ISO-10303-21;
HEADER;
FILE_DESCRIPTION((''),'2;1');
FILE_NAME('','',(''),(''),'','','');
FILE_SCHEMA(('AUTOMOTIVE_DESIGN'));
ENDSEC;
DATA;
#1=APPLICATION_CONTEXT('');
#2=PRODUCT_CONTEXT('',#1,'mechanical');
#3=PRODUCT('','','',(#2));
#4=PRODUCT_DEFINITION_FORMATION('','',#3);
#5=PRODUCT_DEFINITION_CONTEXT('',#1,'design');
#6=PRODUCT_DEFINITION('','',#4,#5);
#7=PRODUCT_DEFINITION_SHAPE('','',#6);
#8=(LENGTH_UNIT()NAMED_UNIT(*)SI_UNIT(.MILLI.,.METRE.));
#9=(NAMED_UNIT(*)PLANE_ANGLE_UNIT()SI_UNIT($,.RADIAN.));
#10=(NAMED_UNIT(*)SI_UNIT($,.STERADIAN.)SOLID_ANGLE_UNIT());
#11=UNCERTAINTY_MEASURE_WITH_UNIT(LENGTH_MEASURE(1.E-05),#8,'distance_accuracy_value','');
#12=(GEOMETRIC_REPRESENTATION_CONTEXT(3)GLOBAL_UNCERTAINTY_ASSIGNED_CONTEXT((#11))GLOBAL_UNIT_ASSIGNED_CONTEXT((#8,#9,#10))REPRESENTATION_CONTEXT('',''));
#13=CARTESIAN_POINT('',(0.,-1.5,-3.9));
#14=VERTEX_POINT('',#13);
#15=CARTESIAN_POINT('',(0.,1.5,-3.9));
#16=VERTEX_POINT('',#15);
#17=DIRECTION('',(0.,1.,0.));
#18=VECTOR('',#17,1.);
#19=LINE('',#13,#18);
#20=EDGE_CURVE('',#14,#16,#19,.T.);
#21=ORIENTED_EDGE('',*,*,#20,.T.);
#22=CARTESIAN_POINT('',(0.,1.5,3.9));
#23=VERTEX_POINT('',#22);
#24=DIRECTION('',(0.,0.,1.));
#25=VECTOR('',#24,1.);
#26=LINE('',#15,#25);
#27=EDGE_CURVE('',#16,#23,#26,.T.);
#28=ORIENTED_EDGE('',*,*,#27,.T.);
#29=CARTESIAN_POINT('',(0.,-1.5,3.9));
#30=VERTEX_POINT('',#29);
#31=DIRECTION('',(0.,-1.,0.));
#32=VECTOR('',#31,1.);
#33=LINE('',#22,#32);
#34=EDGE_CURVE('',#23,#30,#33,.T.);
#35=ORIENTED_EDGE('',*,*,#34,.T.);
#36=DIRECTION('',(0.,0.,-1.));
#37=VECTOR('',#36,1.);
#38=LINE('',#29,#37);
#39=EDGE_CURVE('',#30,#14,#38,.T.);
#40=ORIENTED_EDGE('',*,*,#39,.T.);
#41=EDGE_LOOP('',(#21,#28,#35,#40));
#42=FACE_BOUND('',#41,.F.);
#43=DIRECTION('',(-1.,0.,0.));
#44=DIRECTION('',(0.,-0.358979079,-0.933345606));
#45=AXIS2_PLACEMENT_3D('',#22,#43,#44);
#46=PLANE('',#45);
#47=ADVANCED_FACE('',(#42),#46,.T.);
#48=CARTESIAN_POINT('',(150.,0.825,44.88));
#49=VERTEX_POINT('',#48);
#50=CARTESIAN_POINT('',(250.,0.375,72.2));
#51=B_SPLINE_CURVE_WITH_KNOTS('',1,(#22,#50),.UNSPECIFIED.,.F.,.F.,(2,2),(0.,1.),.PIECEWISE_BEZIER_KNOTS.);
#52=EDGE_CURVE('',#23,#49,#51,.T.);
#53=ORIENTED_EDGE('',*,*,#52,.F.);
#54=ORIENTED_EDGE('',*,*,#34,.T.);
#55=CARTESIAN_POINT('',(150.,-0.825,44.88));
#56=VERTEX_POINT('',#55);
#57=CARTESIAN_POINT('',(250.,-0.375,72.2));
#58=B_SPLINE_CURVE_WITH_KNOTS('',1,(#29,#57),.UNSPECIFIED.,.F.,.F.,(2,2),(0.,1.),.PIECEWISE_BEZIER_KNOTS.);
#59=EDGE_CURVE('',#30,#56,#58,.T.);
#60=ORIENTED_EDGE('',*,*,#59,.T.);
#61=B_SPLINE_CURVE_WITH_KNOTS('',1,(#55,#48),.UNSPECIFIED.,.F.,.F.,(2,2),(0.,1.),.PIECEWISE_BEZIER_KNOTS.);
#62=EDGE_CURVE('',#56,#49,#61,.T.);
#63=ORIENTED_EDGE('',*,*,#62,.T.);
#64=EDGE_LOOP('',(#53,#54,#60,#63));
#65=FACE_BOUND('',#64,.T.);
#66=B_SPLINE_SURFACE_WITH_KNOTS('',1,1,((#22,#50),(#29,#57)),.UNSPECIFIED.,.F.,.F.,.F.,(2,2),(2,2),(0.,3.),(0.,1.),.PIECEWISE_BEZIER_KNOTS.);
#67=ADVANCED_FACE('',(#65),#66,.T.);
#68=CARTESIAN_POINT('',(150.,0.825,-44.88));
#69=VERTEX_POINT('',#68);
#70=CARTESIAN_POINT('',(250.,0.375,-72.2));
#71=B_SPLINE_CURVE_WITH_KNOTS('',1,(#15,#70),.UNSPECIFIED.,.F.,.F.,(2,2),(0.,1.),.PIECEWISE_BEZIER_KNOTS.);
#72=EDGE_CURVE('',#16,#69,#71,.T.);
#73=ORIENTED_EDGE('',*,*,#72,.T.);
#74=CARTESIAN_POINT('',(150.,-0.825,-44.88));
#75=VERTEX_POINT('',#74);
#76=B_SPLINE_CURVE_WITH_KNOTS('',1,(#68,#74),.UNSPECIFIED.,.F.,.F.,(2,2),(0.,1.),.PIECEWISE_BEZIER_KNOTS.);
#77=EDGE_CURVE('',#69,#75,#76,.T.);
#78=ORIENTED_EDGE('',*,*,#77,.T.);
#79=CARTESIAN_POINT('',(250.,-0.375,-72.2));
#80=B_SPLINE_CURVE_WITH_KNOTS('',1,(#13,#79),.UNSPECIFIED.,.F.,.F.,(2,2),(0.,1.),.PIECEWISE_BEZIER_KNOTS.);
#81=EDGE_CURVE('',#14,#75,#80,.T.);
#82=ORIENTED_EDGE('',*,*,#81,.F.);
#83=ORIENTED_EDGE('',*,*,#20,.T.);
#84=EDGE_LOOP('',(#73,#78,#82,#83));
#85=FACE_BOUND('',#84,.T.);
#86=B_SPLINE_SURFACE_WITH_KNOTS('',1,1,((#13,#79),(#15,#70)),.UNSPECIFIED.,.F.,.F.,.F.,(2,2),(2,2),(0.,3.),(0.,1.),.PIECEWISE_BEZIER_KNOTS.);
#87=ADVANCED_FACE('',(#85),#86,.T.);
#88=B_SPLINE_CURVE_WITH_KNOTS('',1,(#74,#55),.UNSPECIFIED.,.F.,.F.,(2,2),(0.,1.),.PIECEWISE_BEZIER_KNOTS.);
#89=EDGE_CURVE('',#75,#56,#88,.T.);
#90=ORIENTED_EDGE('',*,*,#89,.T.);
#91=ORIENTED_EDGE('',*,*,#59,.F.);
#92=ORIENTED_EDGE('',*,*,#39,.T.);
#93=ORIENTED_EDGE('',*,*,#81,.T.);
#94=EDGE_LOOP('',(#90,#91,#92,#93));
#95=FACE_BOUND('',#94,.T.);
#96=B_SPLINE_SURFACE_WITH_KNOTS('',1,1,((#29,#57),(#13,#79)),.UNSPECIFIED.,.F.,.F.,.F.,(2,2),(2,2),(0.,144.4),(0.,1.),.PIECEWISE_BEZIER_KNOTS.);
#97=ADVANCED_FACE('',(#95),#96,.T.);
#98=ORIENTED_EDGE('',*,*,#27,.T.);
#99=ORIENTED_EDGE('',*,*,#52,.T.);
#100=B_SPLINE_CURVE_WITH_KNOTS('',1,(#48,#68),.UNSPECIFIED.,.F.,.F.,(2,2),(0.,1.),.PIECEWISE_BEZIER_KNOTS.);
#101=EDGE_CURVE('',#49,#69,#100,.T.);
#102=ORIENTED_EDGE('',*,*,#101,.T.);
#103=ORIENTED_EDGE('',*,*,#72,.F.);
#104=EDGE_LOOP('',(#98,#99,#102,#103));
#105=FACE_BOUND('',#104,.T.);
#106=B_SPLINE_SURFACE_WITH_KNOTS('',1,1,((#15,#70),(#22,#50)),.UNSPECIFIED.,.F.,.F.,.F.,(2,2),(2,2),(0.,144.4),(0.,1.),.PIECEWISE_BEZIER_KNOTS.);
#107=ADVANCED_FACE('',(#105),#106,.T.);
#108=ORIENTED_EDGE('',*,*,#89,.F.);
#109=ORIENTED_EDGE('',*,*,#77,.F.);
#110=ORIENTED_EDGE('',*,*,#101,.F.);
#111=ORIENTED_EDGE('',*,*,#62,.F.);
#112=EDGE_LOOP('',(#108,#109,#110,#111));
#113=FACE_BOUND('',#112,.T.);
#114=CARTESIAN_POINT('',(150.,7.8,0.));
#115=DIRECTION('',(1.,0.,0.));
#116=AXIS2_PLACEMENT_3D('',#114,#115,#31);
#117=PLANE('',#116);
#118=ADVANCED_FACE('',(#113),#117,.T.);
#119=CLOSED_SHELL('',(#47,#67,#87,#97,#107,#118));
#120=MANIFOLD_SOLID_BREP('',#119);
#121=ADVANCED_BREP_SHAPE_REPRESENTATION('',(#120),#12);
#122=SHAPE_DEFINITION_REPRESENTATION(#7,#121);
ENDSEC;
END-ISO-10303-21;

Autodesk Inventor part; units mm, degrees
sketch "Sketch_2" plane through (0, 0, 0) normal (1, 0, 0) x (0, 1, 0)
  line L0 (-1.5, 3.9) -> (-1.5, -3.9)
  line L1 (-1.5, -3.9) -> (1.5, -3.9)
  line L2 (1.5, -3.9) -> (1.5, 3.9)
  line L3 (1.5, 3.9) -> (-1.5, 3.9)
sketch "Sketch_3" plane through (250, 0, 0) normal (1, 0, 0) x (0, 0, -1)
  line L0 (-72.2, -0.375) -> (72.2, -0.375)
  line L1 (72.2, -0.375) -> (72.2, 0.375)
  line L2 (72.2, 0.375) -> (-72.2, 0.375)
  line L3 (-72.2, 0.375) -> (-72.2, -0.375)
loft "Loft1" add profiles "Sketch_2", "Sketch_3"
sketch "Sketch_4" plane through (0, 0, 0) normal (0, 0, 1) x (1, 0, 0)
  line L0 (150, 7.8) -> (150, -7.8)
  line L1 (150, -7.8) -> (250, -7.8)
  line L2 (250, -7.8) -> (250, 7.8)
  line L3 (250, 7.8) -> (150, 7.8)
extrude "Extrusion1" cut sketch "Sketch_4" along normal mid plane 288.8
ref_plane "CP1_XY" through (0, 0, 0) normal (0, 0, 1) x (1, 0, 0)
ref_plane "CP1_YZ" through (0, 0, 0) normal (1, 0, 0) x (0, 1, 0)
ref_plane "CP1_ZX" through (0, 0, 0) normal (0, 1, 0) x (0, 0, 1)
properties part number "Blindrange_OXS200_11728845"
